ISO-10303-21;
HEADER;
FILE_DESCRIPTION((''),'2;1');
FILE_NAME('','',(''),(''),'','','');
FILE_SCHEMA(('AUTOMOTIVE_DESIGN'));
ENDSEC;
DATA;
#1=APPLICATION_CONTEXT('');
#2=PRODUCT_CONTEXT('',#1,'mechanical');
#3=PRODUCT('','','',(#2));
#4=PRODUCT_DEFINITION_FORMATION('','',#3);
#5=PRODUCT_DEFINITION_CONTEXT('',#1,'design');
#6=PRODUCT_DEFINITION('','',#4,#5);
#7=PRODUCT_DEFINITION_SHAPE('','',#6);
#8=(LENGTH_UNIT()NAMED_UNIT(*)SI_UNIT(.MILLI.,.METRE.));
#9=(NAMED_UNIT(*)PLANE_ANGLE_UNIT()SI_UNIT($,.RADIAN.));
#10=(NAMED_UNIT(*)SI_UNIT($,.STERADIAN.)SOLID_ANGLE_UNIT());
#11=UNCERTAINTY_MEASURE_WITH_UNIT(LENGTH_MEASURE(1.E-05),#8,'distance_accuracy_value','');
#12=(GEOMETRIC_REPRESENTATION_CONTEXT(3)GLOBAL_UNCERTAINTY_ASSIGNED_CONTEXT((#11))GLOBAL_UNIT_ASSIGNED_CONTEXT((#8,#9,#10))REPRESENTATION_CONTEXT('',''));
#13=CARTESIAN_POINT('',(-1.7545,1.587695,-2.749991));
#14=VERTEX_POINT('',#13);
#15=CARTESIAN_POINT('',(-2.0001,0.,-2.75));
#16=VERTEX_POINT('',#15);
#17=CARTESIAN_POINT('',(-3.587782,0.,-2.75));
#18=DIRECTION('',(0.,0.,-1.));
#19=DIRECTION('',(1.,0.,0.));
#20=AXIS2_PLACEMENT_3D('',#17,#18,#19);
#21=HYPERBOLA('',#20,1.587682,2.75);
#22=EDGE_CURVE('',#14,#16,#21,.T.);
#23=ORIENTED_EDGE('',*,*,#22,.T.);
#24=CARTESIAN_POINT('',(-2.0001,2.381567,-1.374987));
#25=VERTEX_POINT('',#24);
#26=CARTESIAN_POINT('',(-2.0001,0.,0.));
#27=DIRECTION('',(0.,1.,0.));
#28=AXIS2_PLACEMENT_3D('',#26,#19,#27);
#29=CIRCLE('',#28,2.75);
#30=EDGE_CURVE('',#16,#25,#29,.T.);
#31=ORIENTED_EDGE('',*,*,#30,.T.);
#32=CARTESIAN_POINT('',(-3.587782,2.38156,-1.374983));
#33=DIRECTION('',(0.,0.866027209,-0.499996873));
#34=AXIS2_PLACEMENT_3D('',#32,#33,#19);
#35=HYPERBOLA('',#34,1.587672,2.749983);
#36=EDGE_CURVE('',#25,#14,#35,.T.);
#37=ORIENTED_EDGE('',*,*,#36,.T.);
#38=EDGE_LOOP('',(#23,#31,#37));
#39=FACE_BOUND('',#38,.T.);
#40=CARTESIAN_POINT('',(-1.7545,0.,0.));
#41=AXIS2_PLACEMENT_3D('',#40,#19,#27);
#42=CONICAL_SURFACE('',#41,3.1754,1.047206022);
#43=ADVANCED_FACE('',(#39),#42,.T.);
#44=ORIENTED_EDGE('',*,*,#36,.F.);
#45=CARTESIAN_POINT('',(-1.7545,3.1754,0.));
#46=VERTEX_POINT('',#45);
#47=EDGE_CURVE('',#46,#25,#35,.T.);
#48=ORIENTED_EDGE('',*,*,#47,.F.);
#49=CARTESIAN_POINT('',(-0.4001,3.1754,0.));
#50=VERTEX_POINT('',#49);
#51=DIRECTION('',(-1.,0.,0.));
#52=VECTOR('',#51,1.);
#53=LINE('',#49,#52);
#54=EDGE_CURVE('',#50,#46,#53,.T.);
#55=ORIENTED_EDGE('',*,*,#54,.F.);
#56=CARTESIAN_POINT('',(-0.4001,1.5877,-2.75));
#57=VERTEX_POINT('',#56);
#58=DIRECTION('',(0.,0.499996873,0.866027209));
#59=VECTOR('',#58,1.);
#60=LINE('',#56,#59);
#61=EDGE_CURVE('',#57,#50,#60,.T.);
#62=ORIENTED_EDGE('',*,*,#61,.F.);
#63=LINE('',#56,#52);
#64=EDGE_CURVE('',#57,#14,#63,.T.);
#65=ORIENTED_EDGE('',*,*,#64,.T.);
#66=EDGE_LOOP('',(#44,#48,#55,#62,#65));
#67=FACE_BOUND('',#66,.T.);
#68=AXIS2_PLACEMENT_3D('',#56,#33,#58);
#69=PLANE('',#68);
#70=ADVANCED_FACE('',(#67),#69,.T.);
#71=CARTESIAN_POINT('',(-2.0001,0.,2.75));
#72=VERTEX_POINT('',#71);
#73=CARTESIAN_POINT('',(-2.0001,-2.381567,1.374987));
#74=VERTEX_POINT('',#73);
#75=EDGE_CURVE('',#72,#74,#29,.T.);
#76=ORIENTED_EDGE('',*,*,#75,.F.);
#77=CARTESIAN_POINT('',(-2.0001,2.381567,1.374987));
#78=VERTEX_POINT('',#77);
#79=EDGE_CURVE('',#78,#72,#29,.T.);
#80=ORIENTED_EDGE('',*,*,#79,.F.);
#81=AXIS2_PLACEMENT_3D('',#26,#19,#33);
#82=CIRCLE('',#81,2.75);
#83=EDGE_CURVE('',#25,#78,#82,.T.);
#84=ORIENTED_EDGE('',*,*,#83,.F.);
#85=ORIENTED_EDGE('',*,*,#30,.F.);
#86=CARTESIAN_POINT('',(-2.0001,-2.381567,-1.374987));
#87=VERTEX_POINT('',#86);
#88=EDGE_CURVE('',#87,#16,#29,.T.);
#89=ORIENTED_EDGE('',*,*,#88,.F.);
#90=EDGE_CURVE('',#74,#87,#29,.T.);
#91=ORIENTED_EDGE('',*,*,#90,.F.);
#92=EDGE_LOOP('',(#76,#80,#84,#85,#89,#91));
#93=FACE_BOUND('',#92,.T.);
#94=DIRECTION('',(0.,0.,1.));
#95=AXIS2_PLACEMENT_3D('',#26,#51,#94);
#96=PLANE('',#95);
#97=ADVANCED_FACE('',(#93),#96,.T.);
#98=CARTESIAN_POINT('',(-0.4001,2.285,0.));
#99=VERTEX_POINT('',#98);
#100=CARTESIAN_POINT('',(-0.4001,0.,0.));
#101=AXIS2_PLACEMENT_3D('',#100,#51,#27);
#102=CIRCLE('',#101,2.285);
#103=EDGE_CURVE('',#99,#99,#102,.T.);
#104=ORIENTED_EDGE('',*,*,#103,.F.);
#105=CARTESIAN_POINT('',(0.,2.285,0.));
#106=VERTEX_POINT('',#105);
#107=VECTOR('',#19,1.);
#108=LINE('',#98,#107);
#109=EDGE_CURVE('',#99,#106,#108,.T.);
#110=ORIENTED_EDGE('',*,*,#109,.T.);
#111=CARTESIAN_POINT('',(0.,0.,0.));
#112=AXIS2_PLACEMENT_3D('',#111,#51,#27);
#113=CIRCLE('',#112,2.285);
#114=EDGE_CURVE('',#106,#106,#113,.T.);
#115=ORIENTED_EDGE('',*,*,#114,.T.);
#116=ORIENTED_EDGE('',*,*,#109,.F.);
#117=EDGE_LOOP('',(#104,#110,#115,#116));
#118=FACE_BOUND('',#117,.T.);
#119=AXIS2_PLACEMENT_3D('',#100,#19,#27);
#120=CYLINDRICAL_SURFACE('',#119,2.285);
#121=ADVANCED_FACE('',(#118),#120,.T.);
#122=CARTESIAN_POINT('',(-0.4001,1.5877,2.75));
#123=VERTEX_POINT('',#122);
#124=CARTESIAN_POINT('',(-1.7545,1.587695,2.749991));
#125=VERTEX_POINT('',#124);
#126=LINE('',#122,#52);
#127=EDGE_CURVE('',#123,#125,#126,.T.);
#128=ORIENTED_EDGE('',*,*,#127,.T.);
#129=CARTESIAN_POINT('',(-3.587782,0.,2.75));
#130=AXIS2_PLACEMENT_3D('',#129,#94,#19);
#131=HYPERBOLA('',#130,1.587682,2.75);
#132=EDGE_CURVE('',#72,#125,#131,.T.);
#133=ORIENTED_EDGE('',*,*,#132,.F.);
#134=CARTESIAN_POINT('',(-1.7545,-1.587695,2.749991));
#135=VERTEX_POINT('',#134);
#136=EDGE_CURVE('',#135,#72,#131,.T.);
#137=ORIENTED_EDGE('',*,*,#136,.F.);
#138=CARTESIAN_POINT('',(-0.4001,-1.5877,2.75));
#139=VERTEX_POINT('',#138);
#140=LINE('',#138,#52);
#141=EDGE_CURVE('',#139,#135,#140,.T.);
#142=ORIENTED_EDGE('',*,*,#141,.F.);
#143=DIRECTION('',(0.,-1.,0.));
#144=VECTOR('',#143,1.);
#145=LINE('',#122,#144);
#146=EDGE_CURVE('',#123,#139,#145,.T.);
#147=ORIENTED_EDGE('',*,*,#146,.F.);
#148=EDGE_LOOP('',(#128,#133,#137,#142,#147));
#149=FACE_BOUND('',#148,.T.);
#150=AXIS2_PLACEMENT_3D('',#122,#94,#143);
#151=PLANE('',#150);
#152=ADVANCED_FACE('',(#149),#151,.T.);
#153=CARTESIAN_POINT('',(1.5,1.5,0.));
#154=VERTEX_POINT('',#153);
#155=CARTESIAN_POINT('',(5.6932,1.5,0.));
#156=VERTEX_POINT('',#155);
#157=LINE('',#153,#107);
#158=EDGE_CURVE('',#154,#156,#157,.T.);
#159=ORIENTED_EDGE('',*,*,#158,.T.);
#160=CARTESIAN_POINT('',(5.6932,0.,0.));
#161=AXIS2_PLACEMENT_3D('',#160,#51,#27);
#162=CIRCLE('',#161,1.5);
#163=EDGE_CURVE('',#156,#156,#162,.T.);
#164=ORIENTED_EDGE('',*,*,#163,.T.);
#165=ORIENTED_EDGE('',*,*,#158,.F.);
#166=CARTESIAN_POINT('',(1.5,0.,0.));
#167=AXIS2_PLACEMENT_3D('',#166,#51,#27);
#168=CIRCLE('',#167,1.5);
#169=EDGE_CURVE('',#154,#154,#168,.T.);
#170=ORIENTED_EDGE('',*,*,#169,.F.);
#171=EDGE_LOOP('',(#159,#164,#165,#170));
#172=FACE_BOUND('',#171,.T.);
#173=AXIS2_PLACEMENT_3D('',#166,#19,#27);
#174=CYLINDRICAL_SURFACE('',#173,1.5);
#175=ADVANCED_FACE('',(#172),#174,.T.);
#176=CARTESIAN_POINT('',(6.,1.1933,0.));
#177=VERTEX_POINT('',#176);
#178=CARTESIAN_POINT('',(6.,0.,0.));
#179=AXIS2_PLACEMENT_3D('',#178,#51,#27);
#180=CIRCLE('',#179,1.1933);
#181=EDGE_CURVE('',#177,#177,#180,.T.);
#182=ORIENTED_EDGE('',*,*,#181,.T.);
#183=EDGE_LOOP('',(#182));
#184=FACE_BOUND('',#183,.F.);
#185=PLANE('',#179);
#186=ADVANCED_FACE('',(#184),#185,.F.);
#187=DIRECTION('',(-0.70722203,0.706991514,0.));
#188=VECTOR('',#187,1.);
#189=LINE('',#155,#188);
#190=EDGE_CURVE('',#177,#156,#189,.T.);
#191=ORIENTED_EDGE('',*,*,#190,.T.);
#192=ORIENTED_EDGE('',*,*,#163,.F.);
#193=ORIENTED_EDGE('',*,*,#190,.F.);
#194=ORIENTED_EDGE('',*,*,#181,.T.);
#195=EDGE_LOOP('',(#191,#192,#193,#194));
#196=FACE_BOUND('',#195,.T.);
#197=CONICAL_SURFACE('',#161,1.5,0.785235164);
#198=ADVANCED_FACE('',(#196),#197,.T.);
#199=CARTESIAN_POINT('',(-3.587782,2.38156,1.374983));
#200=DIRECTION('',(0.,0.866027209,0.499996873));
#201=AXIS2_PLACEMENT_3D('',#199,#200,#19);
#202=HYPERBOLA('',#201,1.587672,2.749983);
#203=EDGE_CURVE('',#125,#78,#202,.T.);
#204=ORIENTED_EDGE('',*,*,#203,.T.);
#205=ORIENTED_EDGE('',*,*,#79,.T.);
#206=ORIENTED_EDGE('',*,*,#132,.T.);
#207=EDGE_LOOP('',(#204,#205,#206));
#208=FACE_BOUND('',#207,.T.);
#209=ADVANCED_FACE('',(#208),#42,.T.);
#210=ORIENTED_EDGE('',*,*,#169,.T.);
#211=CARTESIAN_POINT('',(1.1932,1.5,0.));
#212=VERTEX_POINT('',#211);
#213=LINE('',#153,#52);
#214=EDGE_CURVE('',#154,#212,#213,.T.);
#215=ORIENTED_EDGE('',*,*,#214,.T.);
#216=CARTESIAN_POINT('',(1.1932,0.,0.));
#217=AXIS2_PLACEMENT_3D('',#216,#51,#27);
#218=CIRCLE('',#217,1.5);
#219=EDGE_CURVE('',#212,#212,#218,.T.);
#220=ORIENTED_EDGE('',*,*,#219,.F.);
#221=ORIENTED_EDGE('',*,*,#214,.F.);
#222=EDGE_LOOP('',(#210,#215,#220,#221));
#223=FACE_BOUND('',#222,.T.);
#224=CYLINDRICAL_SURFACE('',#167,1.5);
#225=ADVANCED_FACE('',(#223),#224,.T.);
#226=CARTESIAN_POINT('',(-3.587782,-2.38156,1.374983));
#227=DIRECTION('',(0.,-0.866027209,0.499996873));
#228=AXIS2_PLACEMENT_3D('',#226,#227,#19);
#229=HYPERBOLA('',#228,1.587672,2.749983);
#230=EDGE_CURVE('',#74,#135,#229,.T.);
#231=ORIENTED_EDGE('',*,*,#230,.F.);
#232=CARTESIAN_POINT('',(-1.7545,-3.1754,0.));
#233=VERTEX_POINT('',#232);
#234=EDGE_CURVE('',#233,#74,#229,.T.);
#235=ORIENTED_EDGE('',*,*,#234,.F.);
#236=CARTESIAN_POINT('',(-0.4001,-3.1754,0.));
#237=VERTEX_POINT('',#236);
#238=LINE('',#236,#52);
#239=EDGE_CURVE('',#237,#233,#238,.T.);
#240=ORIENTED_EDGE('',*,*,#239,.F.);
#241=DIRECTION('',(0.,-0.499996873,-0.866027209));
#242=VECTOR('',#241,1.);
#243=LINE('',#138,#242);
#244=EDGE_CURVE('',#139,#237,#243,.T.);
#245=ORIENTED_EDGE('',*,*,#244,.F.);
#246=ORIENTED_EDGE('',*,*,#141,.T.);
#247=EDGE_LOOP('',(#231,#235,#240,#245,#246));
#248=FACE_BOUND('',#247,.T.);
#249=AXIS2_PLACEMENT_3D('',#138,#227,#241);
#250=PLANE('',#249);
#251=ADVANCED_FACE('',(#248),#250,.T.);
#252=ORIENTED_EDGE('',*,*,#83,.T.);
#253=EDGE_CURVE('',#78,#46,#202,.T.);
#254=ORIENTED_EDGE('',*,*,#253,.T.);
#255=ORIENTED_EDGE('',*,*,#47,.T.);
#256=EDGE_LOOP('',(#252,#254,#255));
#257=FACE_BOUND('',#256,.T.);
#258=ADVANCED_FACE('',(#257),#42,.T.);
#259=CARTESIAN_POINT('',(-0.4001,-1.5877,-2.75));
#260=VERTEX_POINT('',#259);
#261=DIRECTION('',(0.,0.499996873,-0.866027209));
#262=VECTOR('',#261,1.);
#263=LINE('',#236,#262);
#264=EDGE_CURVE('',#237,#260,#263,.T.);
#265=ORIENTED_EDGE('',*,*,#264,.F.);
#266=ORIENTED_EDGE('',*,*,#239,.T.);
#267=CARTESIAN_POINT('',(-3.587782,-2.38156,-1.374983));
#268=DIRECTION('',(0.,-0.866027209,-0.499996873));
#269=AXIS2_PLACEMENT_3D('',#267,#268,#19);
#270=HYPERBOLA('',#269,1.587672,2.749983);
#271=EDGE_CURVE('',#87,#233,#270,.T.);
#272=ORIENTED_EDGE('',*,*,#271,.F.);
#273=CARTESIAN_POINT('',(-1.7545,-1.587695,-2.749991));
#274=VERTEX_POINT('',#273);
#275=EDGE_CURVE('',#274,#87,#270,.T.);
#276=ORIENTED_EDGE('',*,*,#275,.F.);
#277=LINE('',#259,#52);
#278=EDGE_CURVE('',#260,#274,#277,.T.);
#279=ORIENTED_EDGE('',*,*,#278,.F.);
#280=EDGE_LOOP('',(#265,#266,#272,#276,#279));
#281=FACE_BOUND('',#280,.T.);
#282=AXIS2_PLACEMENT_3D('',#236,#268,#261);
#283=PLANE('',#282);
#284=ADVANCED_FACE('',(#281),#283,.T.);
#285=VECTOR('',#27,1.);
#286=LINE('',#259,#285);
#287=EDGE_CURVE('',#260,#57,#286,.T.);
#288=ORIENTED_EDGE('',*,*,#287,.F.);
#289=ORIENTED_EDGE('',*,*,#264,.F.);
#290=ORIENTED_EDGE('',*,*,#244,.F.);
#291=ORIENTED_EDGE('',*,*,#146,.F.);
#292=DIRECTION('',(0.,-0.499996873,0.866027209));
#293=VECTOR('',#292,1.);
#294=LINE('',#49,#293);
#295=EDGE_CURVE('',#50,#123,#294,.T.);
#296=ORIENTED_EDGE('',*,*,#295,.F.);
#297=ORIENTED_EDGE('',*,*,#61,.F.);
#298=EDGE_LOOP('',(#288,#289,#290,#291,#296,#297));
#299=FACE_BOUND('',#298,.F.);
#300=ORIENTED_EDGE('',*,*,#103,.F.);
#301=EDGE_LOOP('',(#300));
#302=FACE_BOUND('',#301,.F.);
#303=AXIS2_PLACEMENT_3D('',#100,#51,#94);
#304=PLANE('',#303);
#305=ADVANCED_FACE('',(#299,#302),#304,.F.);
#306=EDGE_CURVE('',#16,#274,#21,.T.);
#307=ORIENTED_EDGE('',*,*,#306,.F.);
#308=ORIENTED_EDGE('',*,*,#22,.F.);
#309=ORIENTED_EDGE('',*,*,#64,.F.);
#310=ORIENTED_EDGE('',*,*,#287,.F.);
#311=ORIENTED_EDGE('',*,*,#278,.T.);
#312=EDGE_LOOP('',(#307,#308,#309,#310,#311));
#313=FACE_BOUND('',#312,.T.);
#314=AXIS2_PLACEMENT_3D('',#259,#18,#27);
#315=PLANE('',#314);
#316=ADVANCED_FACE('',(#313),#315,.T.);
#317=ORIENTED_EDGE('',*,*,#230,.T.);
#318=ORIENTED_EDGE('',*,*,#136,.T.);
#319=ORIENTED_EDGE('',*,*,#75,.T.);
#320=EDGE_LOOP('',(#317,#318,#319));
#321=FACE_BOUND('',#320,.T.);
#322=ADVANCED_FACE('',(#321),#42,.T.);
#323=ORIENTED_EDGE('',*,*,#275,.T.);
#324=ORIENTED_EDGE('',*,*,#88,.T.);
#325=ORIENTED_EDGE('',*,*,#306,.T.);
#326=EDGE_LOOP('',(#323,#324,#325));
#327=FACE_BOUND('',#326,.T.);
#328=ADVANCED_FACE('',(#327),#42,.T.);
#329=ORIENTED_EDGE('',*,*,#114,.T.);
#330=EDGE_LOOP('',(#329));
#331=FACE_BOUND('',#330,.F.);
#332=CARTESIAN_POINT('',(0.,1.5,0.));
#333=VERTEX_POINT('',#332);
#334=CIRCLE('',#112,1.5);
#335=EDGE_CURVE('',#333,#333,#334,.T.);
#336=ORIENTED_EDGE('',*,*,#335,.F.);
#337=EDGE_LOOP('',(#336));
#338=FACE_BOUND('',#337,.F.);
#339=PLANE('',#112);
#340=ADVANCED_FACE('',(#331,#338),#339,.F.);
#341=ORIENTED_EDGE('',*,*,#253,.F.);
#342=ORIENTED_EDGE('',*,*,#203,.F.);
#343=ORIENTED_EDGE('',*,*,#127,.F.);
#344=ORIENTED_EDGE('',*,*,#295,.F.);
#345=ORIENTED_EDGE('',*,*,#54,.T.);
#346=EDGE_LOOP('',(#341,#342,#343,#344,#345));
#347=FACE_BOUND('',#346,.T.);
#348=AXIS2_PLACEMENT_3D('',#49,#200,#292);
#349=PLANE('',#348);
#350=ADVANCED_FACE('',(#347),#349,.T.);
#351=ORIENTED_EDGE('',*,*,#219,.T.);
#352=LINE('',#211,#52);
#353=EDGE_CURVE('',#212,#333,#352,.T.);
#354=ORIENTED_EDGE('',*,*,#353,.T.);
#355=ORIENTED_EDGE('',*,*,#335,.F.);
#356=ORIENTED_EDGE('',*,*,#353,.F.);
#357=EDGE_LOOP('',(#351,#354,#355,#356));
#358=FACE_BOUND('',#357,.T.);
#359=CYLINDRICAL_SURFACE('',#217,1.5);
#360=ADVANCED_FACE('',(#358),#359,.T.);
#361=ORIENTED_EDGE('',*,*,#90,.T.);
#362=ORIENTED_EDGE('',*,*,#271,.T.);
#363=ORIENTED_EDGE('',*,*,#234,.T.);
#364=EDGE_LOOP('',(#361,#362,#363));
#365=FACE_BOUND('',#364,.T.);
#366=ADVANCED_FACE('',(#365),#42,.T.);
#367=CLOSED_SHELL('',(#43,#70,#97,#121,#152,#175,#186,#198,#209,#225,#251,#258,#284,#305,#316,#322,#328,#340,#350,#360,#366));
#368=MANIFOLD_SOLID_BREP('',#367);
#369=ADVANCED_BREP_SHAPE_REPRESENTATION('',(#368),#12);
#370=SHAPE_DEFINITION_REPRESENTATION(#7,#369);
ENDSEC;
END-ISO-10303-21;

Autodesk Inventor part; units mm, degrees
ref_plane "YZ Plane" through (0, 0, 0) normal (1, 0, 0) x (0, 1, 0)
ref_plane "XZ Plane" through (0, 0, 0) normal (0, 1, 0) x (-1, 0, 0)
sketch "Skizze1" plane through (0, 0, 0) normal (0, 0, 1) x (1, 0, 0)
  line L0 (0, 2.285) -> (0, 1.5)
  line L1 (1.5, 1.5) -> (6, 1.5)
  line L2 (6, 1.5) -> (6, 0)
  line L3 (6, 0) -> (-0.4001, 0)
  line L4 (-1.6801, 0) -> (7.28, 0) projected
  line L5 (-0.4001, 0) -> (-0.4001, 2.285)
  line L6 (-0.4001, 2.285) -> (0, 2.285)
  line L7 (1.5, 1.5) -> (1.1932, 1.5)
  line L8 (1.1932, 1.5) -> (0, 1.5)
  line L9 (0, -0.457) -> (0, 2.742) projected
  dimension "d0" = 6
  dimension "d1" = 4.5
  dimension "d2" = 3
  dimension "d9" = 0.4001
  dimension "d10" = 4.57
  dimension "d13" = 0.3068
  dimension "d14" = 3
revolve "Körper" add sketch "Skizze1" angle 360 about axis through (6, 0, 0) along (-1, 0, 0)
sketch "Skizze2" plane through (-0.4001, 0, 0) normal (-1, 0, 0) x (0, 0, 1)
  line L0 (0, 3.1754) -> (2.75, 1.5877)
  line L1 (2.75, 1.5877) -> (2.75, -1.5877)
  line L2 (2.75, -1.5877) -> (0, -3.1754)
  line L3 (0, -3.1754) -> (-2.75, -1.5877)
  line L4 (-2.75, -1.5877) -> (-2.75, 1.5877)
  line L5 (-2.75, 1.5877) -> (0, 3.1754)
  point P0 (0, 0)
  point P1 (0, 0)
  dimension "d11" = 5.5
extrude "Kopf" add sketch "Skizze2" along normal blind 1.6
sketch "Skizze4" plane through (0, 0, 0) normal (0, 0, 1) x (1, 0, 0)
  line L0 (-2.0001, 2.75) -> (-2.0001, 3.1754)
  line L1 (-2.0001, 3.1754) -> (-1.7545, 3.1754)
  line L2 (-1.7545, 3.1754) -> (-2.0001, 2.75)
  line L3 (-2.3201, 0) -> (-0.0801, 0) projected
  line L4 (-0.4001, 3.1754) -> (-2.0001, 3.1754) projected
  line L5 (-2.0001, 1.5877) -> (-2.0001, 3.1754) projected
  dimension "d5" = 30
  dimension "d19" = 5.5
revolve "Fase1" cut sketch "Skizze4" angle 360 about axis through (-10, 0, 0) along (1, 0, 0)
thread "Gewinde" size "M3x0.5" class "6g" standard "ISO Metric profile" length 4.5
chamfer "Fase2" distance 0.3067 distance2 0.3068 1 edges at (6, -1.5, 0) measured on face at (6, 0.5, -0.823)
ref_plane "Work Plane1" through (1.525, 0, 0) normal (0, 0, 1) x (1, 0, 0)
equation "\"d0\" = NLG"
equation "\"d1\" = GEL"
equation "\"d2\" = GD"
equation "\"d10\" = SD2"
equation "\"d14\" = BDM"
equation "\"d11\" = SW"
equation "\"d3\" = KOH - SD"
equation "\"d5\" = ANG1"
equation "\"d19\" = SW0"
equation "\"d15\" = GEL"
equation "\"d6\" = -0.5 * SPD + 0.5 * GD"
equation "\"NLG\" = 6"
equation "\"GD\" = NND"
equation "\"BDM\" = NND"
equation "\"KOH\" = 2"
equation "\"GEL\" = 4.5"
equation "\"SW\" = 5.5"
equation "\"SW0\" = SW"
equation "\"SPD\" = NND - 1.2269 * PTC"
equation "\"SD2\" = 4.57"
equation "\"SD\" = 0.4"
equation "\"ANG1\" = 30deg"
equation "\"GAL\" = 0.61345 * PTC"
equation "\"GUL\" = 0.61345 * PTC"
equation "\"RR\" = 0.1"
equation "\"GD1\" = THREADDIA - 1.2269 * PTC"
equation "\"THREADDIA\" = 3"
equation "\"SDH\" = SD2"
equation "\"SDHG\" = 1.5"
equation "\"TOA\" = 30deg"
equation "\"PTC\" = 0.5"
equation "\"NND\" = 3"
equation "\"E0\" = 6.3525"
properties part number "ISO 4017 - M3 x 6" material "Stahl, weich"
